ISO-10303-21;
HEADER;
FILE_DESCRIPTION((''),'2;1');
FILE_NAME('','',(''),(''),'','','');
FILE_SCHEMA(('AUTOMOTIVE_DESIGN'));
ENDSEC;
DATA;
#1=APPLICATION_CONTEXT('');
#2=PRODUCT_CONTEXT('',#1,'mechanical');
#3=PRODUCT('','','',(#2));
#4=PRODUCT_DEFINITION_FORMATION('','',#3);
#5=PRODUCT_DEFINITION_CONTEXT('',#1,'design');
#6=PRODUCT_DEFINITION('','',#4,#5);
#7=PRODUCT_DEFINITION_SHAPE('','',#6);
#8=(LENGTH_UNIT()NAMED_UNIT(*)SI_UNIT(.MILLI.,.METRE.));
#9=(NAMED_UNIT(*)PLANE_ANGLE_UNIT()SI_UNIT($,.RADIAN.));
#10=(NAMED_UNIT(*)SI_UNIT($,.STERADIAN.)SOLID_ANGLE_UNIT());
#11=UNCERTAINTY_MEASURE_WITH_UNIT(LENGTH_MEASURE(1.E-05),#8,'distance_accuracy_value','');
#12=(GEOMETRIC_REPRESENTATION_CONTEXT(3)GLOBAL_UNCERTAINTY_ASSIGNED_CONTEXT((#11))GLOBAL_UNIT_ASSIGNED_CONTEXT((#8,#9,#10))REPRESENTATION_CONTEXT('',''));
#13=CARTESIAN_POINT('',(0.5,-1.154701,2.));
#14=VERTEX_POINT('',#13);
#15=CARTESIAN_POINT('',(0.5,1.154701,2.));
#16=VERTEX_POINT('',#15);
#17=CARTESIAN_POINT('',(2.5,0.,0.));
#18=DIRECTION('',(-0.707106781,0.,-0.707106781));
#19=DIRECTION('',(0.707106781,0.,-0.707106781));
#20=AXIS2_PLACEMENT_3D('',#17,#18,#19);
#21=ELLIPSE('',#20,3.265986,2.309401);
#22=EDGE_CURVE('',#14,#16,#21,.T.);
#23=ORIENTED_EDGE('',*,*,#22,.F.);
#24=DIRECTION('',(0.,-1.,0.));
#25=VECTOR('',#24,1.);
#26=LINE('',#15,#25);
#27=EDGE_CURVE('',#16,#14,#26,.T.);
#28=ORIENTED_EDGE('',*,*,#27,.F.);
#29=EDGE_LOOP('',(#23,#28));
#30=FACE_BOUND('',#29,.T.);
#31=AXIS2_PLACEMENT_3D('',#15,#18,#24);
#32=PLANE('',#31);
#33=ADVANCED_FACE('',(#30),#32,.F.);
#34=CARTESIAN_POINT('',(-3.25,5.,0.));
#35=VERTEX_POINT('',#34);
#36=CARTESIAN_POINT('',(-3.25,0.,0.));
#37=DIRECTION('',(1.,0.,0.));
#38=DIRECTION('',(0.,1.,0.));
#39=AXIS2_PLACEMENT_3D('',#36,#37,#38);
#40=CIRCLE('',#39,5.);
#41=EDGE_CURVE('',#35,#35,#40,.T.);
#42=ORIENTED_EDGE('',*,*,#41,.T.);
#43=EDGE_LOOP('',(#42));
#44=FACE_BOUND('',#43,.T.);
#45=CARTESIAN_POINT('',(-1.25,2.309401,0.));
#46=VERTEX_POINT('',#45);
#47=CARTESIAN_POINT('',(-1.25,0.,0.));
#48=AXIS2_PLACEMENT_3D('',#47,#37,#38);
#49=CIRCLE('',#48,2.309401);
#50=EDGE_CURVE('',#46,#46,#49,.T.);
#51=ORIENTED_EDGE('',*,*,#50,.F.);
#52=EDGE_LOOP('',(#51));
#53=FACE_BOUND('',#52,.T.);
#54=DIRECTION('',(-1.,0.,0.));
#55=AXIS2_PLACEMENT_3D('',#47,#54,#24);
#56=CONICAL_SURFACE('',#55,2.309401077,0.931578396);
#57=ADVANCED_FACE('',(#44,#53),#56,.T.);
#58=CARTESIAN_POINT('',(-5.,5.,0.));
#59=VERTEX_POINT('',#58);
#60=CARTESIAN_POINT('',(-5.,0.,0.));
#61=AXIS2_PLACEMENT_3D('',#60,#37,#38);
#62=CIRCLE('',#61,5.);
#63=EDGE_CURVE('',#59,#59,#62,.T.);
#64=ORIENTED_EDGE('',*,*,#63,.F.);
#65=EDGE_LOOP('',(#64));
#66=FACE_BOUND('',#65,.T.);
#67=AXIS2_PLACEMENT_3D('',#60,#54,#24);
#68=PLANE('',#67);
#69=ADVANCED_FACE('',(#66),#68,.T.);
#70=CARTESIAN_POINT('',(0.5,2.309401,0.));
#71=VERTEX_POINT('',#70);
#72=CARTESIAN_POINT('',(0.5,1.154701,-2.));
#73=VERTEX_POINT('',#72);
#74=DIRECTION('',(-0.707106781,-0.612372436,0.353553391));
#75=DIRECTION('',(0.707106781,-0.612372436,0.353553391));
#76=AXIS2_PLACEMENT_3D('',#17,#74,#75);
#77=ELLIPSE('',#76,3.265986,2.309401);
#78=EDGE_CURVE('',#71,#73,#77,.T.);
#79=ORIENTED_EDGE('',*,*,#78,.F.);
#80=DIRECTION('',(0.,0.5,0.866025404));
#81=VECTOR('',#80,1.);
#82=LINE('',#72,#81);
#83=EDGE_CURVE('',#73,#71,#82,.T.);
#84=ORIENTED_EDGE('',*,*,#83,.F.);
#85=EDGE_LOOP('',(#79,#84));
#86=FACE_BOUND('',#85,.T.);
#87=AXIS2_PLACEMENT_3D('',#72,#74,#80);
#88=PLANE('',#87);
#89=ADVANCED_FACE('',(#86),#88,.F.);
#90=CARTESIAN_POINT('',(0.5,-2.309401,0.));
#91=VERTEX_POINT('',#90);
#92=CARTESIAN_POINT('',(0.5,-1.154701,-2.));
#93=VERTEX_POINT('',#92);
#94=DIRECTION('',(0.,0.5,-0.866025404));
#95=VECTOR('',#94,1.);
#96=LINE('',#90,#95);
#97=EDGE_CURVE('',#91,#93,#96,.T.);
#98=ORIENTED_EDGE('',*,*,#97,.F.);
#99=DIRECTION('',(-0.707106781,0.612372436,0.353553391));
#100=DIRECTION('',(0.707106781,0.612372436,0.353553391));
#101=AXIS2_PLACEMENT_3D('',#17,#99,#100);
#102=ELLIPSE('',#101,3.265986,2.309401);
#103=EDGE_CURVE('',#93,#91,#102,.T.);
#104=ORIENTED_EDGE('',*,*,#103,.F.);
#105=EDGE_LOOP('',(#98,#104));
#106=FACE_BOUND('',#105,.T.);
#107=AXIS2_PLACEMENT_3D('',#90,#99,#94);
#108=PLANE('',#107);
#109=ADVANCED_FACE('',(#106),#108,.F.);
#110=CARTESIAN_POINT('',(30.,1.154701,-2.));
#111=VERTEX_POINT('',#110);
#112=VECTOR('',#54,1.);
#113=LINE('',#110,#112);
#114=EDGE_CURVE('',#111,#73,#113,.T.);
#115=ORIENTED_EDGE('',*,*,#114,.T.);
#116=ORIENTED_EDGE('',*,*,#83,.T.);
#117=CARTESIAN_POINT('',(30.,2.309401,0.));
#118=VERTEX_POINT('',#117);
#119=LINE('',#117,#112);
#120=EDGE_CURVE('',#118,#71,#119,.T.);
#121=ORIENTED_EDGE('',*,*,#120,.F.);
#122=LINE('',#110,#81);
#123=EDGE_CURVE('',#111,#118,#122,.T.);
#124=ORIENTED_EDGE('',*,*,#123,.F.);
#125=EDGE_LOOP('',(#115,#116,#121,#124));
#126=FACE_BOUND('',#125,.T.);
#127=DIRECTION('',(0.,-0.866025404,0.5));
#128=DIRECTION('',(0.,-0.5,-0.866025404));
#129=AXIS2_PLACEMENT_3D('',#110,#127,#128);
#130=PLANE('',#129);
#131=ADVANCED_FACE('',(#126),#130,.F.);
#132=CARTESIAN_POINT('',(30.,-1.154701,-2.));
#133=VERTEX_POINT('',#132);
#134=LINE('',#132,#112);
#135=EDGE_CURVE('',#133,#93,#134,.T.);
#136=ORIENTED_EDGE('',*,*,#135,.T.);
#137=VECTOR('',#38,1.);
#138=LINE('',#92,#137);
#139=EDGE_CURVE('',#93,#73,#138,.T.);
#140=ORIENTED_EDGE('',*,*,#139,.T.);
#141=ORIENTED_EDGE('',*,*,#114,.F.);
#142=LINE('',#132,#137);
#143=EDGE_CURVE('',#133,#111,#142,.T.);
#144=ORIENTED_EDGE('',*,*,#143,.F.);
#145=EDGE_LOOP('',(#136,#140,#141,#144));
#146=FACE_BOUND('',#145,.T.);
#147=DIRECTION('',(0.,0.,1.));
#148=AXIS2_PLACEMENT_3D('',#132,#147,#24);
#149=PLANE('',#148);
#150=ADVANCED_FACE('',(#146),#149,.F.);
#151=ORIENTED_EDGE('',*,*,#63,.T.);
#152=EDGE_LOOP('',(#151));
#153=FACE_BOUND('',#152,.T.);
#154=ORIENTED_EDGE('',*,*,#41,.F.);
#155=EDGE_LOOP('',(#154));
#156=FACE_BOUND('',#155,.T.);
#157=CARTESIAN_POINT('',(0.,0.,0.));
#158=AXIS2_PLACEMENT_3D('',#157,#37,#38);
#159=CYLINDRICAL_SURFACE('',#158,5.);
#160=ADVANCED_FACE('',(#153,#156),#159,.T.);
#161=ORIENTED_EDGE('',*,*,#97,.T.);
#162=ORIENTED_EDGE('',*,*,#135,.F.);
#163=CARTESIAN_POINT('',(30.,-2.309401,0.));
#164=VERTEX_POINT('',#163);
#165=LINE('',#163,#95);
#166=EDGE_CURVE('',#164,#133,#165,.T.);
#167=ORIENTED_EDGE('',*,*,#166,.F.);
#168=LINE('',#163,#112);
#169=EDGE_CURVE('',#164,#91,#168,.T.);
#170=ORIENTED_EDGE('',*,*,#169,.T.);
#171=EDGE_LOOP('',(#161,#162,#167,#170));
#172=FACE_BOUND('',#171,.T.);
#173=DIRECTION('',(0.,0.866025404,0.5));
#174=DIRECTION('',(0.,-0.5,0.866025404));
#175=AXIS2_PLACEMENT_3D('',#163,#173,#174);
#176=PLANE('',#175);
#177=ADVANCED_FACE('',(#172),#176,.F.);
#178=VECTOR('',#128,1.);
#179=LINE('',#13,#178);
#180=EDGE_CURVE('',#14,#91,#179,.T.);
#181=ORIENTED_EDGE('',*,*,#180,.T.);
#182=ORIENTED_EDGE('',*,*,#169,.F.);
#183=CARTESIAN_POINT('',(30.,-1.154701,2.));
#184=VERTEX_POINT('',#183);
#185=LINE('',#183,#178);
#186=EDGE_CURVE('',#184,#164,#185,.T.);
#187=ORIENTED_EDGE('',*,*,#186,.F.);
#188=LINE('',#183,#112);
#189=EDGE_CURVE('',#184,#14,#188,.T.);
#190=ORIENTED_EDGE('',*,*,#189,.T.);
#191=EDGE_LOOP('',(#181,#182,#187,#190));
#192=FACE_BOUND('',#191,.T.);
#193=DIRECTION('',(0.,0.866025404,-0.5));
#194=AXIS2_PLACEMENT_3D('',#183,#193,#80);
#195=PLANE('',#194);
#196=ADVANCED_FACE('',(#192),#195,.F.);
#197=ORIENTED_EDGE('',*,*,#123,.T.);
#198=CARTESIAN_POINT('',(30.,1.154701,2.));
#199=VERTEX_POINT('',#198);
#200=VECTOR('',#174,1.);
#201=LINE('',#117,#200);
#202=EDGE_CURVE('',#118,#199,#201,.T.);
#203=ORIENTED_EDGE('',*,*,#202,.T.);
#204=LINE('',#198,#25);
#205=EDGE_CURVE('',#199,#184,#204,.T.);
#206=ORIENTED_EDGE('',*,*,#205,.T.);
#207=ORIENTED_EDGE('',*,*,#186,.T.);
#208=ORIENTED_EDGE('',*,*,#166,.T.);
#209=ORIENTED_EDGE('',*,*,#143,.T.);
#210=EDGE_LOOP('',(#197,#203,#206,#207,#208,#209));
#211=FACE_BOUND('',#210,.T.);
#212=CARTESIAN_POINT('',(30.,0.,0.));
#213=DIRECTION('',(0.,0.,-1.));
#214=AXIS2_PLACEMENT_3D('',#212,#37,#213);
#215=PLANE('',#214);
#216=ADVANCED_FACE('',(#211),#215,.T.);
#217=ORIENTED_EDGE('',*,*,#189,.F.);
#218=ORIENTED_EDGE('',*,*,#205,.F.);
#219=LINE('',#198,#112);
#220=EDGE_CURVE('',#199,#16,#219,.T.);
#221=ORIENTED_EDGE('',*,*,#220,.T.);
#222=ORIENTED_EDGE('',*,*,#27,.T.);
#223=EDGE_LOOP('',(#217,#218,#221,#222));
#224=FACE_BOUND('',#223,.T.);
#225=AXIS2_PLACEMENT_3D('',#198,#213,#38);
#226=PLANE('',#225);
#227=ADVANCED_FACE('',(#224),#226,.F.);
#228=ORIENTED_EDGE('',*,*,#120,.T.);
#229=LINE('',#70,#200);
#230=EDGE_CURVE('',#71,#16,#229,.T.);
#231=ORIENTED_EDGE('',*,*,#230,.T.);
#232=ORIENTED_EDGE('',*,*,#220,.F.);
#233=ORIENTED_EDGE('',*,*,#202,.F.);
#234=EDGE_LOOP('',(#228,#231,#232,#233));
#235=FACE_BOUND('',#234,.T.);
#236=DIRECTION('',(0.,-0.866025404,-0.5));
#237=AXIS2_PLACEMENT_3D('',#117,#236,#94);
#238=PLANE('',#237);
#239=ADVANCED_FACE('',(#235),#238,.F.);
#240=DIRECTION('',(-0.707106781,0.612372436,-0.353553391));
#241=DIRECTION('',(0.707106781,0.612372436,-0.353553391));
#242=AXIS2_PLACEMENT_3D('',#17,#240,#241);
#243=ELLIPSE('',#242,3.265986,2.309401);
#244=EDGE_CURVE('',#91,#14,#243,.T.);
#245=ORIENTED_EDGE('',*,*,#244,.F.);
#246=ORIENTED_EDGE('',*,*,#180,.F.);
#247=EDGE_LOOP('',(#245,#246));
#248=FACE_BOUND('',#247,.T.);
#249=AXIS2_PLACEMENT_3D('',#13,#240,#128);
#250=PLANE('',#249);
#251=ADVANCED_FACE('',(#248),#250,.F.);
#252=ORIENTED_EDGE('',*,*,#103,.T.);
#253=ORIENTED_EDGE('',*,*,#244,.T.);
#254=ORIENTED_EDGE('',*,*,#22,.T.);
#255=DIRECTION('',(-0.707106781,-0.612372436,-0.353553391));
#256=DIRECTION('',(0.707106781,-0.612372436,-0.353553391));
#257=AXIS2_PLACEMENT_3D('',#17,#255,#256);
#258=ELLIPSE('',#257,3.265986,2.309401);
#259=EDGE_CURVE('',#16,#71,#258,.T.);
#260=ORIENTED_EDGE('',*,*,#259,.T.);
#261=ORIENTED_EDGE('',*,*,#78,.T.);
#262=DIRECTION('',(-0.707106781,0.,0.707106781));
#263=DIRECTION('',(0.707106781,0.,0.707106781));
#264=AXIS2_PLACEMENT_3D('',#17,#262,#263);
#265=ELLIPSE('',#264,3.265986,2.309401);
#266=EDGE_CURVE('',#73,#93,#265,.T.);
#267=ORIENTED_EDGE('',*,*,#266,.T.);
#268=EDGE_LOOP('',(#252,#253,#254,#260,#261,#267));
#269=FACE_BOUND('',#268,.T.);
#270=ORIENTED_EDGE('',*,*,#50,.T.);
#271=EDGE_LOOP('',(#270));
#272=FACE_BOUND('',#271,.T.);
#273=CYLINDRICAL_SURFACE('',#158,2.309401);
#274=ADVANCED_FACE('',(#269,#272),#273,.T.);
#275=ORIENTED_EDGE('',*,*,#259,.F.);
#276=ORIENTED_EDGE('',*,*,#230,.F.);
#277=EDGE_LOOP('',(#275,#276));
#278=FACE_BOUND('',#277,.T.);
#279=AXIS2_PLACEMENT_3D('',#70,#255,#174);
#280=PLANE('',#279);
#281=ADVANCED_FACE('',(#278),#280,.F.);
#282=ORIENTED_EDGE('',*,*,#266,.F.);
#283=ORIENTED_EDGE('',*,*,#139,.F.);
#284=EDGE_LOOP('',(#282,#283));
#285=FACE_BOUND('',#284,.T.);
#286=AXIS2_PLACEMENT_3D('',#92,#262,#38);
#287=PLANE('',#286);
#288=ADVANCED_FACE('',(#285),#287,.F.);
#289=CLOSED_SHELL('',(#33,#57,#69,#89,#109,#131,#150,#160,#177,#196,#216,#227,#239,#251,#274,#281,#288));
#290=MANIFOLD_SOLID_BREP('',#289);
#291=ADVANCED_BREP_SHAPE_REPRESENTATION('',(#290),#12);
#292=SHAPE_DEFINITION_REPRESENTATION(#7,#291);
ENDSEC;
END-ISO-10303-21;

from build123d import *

# Parameters (mm, degrees)
BOSS_EXTRUDE1_DEPTH = 30
CHAMFER1_SIZE       = 0.5
CHAMFER2_SIZE       = 0.5
CHAMFER3_SIZE       = 0.5


with BuildPart() as part:
    # Sketch1 → Boss-Extrude1 (new body)
    with BuildSketch(Plane(origin=(0, 0, 0), x_dir=(0, 0, -1), z_dir=(1, 0, 0))):
        Polygon((0, 2.309401077), (-2, 1.154700538), (-2, -1.154700538), (0, -2.309401077), (2, -1.154700538), (2, 1.154700538), align=None)
    extrude(amount=BOSS_EXTRUDE1_DEPTH)

    # Sketch4 → Revolve4 (revolve)
    with BuildSketch(Plane.XY):
        Polygon((0, 0), (-5, 0), (-5, 5), (-3.25, 5), (-1.25, 2.309401077), (0, 2.309401077), align=None)
    revolve(axis=Axis((0, 0, 0), (-1, 0, 0)))

    # Chamfer1
    # the kernel refuses this chamfer: 0.5 mm, written as the material it adds along each edge
    with BuildSketch(Plane(origin=(0, -2.952321824, 1.113571399), x_dir=(0.9996219169112968, 0.02381212764409037, 0.013747938305293311), z_dir=(0, 0.5000000000000001, -0.8660254037844386))) as chamfer1_piece_1_section:
        Polygon((CHAMFER1_SIZE * 0.999621916911, CHAMFER1_SIZE * 0.0274958766106), (-CHAMFER1_SIZE * 0.0274958766106, CHAMFER1_SIZE * 0.999621916911), (0, 0), align=None)
    chamfer1_piece_1 = extrude(amount=4.881084065, mode=Mode.PRIVATE)
    chamfer1_piece_1 = split(chamfer1_piece_1, bisect_by=Plane(origin=(0.199770768, -1.81784162, -2), z_dir=(0, 0, 1)), keep=Keep.TOP, mode=Mode.PRIVATE)
    chamfer1_piece_1 = split(chamfer1_piece_1, bisect_by=Plane(origin=(0.199770768, -2.640971617, -0.574297023), z_dir=(0, 0.8660254037844387, -0.49999999999999983)), keep=Keep.TOP, mode=Mode.PRIVATE)
    chamfer1_piece_1 = chamfer1_piece_1 & Plane(origin=(0.199770768, 0, 0), x_dir=(0, 1, 0), z_dir=(1, 0, 0)) * Cylinder(2.309401077, 12, mode=Mode.PRIVATE)
    add(chamfer1_piece_1)
    with BuildSketch(Plane(origin=(0, 2.952321824, -1.113571399), x_dir=(0.9996219169112968, -0.023812127644089905, -0.013747938305293039), z_dir=(0, -0.5000000000000001, 0.8660254037844387))) as chamfer1_piece_2_section:
        Polygon((CHAMFER1_SIZE * 0.999621916911, CHAMFER1_SIZE * 0.0274958766106), (-CHAMFER1_SIZE * 0.0274958766106, CHAMFER1_SIZE * 0.999621916911), (0, 0), align=None)
    chamfer1_piece_2 = extrude(amount=4.881084065, mode=Mode.PRIVATE)
    chamfer1_piece_2 = split(chamfer1_piece_2, bisect_by=Plane(origin=(0.19977077, 2.640971618, 0.574297023), z_dir=(0, -0.8660254037844388, 0.49999999999999983)), keep=Keep.TOP, mode=Mode.PRIVATE)
    chamfer1_piece_2 = split(chamfer1_piece_2, bisect_by=Plane(origin=(0.19977077, 1.817841619, 2), z_dir=(0, 0, -1)), keep=Keep.TOP, mode=Mode.PRIVATE)
    chamfer1_piece_2 = chamfer1_piece_2 & Plane(origin=(0.19977077, 0, 0), x_dir=(0, 1, 0), z_dir=(1, 0, 0)) * Cylinder(2.309401077, 12, mode=Mode.PRIVATE)
    add(chamfer1_piece_2)

    # Chamfer2
    # the kernel refuses this chamfer: 0.5 mm, written as the material it adds along each edge
    with BuildSketch(Plane(origin=(0, -2.440542032, -2), x_dir=(0.9996219169112968, 0, 0.027495876610586494), z_dir=(0, 1, 0))) as chamfer2_piece_1_section:
        Polygon((CHAMFER2_SIZE * 0.999621916911, CHAMFER2_SIZE * 0.0274958766106), (-CHAMFER2_SIZE * 0.0274958766106, CHAMFER2_SIZE * 0.999621916911), (0, 0), align=None)
    chamfer2_piece_1 = extrude(amount=4.881084065, mode=Mode.PRIVATE)
    chamfer2_piece_1 = chamfer2_piece_1 & Plane(origin=(0.352657497, 0, 0), x_dir=(0, 1, 0), z_dir=(1, 0, 0)) * Cylinder(2.309401077, 12, mode=Mode.PRIVATE)
    chamfer2_piece_1 = split(chamfer2_piece_1, bisect_by=Plane(origin=(0.352657497, 0.578909499, -2.997299335), z_dir=(0, -0.8660254037844388, 0.49999999999999983)), keep=Keep.TOP, mode=Mode.PRIVATE)
    add(chamfer2_piece_1)
    with BuildSketch(Plane(origin=(0, 2.440542032, 2), x_dir=(0.9996219169112968, 0, -0.027495876610586494), z_dir=(0, -1, 0))) as chamfer2_piece_2_section:
        Polygon((CHAMFER2_SIZE * 0.999621916911, CHAMFER2_SIZE * 0.0274958766106), (-CHAMFER2_SIZE * 0.0274958766106, CHAMFER2_SIZE * 0.999621916911), (0, 0), align=None)
    chamfer2_piece_2 = extrude(amount=4.881084065, mode=Mode.PRIVATE)
    chamfer2_piece_2 = chamfer2_piece_2 & Plane(origin=(0.352657497, 0, 0), x_dir=(0, 1, 0), z_dir=(1, 0, 0)) * Cylinder(2.309401077, 12, mode=Mode.PRIVATE)
    chamfer2_piece_2 = split(chamfer2_piece_2, bisect_by=Plane(origin=(0.352657497, -0.578909499, 2.997299335), z_dir=(0, 0.8660254037844387, -0.49999999999999983)), keep=Keep.TOP, mode=Mode.PRIVATE)
    add(chamfer2_piece_2)

    # Chamfer3
    # the kernel refuses this chamfer: 0.5 mm, written as the material it adds along each edge
    with BuildSketch(Plane(origin=(0, 0.511779791, -3.113571399), x_dir=(-0.027495876610586466, 0.8656979742248804, -0.49981095845564816), z_dir=(0, 0.49999999999999983, 0.8660254037844388))) as chamfer3_piece_1_section:
        Polygon((CHAMFER3_SIZE * 0.999621916911, -CHAMFER3_SIZE * 0.0274958766106), (-CHAMFER3_SIZE * 0.0274958766106, -CHAMFER3_SIZE * 0.999621916911), (0, 0), align=None)
    chamfer3_piece_1 = extrude(amount=4.881084065, mode=Mode.PRIVATE)
    chamfer3_piece_1 = chamfer3_piece_1 & Plane(origin=(0.352657492, 0, 0), x_dir=(0, 1, 0), z_dir=(1, 0, 0)) * Cylinder(2.309401077, 12, mode=Mode.PRIVATE)
    add(chamfer3_piece_1)
    with BuildSketch(Plane(origin=(0, -0.511779791, 3.113571399), x_dir=(0.9996219169112968, 0.023812127644090055, -0.013747938305293115), z_dir=(0, -0.4999999999999999, -0.8660254037844388))) as chamfer3_piece_2_section:
        Polygon((CHAMFER3_SIZE * 0.999621916911, CHAMFER3_SIZE * 0.0274958766106), (-CHAMFER3_SIZE * 0.0274958766106, CHAMFER3_SIZE * 0.999621916911), (0, 0), align=None)
    chamfer3_piece_2 = extrude(amount=4.881084065, mode=Mode.PRIVATE)
    chamfer3_piece_2 = chamfer3_piece_2 & Plane(origin=(0.352657501, 0, 0), x_dir=(0, 1, 0), z_dir=(1, 0, 0)) * Cylinder(2.309401077, 12, mode=Mode.PRIVATE)
    add(chamfer3_piece_2)


solid = part.part
